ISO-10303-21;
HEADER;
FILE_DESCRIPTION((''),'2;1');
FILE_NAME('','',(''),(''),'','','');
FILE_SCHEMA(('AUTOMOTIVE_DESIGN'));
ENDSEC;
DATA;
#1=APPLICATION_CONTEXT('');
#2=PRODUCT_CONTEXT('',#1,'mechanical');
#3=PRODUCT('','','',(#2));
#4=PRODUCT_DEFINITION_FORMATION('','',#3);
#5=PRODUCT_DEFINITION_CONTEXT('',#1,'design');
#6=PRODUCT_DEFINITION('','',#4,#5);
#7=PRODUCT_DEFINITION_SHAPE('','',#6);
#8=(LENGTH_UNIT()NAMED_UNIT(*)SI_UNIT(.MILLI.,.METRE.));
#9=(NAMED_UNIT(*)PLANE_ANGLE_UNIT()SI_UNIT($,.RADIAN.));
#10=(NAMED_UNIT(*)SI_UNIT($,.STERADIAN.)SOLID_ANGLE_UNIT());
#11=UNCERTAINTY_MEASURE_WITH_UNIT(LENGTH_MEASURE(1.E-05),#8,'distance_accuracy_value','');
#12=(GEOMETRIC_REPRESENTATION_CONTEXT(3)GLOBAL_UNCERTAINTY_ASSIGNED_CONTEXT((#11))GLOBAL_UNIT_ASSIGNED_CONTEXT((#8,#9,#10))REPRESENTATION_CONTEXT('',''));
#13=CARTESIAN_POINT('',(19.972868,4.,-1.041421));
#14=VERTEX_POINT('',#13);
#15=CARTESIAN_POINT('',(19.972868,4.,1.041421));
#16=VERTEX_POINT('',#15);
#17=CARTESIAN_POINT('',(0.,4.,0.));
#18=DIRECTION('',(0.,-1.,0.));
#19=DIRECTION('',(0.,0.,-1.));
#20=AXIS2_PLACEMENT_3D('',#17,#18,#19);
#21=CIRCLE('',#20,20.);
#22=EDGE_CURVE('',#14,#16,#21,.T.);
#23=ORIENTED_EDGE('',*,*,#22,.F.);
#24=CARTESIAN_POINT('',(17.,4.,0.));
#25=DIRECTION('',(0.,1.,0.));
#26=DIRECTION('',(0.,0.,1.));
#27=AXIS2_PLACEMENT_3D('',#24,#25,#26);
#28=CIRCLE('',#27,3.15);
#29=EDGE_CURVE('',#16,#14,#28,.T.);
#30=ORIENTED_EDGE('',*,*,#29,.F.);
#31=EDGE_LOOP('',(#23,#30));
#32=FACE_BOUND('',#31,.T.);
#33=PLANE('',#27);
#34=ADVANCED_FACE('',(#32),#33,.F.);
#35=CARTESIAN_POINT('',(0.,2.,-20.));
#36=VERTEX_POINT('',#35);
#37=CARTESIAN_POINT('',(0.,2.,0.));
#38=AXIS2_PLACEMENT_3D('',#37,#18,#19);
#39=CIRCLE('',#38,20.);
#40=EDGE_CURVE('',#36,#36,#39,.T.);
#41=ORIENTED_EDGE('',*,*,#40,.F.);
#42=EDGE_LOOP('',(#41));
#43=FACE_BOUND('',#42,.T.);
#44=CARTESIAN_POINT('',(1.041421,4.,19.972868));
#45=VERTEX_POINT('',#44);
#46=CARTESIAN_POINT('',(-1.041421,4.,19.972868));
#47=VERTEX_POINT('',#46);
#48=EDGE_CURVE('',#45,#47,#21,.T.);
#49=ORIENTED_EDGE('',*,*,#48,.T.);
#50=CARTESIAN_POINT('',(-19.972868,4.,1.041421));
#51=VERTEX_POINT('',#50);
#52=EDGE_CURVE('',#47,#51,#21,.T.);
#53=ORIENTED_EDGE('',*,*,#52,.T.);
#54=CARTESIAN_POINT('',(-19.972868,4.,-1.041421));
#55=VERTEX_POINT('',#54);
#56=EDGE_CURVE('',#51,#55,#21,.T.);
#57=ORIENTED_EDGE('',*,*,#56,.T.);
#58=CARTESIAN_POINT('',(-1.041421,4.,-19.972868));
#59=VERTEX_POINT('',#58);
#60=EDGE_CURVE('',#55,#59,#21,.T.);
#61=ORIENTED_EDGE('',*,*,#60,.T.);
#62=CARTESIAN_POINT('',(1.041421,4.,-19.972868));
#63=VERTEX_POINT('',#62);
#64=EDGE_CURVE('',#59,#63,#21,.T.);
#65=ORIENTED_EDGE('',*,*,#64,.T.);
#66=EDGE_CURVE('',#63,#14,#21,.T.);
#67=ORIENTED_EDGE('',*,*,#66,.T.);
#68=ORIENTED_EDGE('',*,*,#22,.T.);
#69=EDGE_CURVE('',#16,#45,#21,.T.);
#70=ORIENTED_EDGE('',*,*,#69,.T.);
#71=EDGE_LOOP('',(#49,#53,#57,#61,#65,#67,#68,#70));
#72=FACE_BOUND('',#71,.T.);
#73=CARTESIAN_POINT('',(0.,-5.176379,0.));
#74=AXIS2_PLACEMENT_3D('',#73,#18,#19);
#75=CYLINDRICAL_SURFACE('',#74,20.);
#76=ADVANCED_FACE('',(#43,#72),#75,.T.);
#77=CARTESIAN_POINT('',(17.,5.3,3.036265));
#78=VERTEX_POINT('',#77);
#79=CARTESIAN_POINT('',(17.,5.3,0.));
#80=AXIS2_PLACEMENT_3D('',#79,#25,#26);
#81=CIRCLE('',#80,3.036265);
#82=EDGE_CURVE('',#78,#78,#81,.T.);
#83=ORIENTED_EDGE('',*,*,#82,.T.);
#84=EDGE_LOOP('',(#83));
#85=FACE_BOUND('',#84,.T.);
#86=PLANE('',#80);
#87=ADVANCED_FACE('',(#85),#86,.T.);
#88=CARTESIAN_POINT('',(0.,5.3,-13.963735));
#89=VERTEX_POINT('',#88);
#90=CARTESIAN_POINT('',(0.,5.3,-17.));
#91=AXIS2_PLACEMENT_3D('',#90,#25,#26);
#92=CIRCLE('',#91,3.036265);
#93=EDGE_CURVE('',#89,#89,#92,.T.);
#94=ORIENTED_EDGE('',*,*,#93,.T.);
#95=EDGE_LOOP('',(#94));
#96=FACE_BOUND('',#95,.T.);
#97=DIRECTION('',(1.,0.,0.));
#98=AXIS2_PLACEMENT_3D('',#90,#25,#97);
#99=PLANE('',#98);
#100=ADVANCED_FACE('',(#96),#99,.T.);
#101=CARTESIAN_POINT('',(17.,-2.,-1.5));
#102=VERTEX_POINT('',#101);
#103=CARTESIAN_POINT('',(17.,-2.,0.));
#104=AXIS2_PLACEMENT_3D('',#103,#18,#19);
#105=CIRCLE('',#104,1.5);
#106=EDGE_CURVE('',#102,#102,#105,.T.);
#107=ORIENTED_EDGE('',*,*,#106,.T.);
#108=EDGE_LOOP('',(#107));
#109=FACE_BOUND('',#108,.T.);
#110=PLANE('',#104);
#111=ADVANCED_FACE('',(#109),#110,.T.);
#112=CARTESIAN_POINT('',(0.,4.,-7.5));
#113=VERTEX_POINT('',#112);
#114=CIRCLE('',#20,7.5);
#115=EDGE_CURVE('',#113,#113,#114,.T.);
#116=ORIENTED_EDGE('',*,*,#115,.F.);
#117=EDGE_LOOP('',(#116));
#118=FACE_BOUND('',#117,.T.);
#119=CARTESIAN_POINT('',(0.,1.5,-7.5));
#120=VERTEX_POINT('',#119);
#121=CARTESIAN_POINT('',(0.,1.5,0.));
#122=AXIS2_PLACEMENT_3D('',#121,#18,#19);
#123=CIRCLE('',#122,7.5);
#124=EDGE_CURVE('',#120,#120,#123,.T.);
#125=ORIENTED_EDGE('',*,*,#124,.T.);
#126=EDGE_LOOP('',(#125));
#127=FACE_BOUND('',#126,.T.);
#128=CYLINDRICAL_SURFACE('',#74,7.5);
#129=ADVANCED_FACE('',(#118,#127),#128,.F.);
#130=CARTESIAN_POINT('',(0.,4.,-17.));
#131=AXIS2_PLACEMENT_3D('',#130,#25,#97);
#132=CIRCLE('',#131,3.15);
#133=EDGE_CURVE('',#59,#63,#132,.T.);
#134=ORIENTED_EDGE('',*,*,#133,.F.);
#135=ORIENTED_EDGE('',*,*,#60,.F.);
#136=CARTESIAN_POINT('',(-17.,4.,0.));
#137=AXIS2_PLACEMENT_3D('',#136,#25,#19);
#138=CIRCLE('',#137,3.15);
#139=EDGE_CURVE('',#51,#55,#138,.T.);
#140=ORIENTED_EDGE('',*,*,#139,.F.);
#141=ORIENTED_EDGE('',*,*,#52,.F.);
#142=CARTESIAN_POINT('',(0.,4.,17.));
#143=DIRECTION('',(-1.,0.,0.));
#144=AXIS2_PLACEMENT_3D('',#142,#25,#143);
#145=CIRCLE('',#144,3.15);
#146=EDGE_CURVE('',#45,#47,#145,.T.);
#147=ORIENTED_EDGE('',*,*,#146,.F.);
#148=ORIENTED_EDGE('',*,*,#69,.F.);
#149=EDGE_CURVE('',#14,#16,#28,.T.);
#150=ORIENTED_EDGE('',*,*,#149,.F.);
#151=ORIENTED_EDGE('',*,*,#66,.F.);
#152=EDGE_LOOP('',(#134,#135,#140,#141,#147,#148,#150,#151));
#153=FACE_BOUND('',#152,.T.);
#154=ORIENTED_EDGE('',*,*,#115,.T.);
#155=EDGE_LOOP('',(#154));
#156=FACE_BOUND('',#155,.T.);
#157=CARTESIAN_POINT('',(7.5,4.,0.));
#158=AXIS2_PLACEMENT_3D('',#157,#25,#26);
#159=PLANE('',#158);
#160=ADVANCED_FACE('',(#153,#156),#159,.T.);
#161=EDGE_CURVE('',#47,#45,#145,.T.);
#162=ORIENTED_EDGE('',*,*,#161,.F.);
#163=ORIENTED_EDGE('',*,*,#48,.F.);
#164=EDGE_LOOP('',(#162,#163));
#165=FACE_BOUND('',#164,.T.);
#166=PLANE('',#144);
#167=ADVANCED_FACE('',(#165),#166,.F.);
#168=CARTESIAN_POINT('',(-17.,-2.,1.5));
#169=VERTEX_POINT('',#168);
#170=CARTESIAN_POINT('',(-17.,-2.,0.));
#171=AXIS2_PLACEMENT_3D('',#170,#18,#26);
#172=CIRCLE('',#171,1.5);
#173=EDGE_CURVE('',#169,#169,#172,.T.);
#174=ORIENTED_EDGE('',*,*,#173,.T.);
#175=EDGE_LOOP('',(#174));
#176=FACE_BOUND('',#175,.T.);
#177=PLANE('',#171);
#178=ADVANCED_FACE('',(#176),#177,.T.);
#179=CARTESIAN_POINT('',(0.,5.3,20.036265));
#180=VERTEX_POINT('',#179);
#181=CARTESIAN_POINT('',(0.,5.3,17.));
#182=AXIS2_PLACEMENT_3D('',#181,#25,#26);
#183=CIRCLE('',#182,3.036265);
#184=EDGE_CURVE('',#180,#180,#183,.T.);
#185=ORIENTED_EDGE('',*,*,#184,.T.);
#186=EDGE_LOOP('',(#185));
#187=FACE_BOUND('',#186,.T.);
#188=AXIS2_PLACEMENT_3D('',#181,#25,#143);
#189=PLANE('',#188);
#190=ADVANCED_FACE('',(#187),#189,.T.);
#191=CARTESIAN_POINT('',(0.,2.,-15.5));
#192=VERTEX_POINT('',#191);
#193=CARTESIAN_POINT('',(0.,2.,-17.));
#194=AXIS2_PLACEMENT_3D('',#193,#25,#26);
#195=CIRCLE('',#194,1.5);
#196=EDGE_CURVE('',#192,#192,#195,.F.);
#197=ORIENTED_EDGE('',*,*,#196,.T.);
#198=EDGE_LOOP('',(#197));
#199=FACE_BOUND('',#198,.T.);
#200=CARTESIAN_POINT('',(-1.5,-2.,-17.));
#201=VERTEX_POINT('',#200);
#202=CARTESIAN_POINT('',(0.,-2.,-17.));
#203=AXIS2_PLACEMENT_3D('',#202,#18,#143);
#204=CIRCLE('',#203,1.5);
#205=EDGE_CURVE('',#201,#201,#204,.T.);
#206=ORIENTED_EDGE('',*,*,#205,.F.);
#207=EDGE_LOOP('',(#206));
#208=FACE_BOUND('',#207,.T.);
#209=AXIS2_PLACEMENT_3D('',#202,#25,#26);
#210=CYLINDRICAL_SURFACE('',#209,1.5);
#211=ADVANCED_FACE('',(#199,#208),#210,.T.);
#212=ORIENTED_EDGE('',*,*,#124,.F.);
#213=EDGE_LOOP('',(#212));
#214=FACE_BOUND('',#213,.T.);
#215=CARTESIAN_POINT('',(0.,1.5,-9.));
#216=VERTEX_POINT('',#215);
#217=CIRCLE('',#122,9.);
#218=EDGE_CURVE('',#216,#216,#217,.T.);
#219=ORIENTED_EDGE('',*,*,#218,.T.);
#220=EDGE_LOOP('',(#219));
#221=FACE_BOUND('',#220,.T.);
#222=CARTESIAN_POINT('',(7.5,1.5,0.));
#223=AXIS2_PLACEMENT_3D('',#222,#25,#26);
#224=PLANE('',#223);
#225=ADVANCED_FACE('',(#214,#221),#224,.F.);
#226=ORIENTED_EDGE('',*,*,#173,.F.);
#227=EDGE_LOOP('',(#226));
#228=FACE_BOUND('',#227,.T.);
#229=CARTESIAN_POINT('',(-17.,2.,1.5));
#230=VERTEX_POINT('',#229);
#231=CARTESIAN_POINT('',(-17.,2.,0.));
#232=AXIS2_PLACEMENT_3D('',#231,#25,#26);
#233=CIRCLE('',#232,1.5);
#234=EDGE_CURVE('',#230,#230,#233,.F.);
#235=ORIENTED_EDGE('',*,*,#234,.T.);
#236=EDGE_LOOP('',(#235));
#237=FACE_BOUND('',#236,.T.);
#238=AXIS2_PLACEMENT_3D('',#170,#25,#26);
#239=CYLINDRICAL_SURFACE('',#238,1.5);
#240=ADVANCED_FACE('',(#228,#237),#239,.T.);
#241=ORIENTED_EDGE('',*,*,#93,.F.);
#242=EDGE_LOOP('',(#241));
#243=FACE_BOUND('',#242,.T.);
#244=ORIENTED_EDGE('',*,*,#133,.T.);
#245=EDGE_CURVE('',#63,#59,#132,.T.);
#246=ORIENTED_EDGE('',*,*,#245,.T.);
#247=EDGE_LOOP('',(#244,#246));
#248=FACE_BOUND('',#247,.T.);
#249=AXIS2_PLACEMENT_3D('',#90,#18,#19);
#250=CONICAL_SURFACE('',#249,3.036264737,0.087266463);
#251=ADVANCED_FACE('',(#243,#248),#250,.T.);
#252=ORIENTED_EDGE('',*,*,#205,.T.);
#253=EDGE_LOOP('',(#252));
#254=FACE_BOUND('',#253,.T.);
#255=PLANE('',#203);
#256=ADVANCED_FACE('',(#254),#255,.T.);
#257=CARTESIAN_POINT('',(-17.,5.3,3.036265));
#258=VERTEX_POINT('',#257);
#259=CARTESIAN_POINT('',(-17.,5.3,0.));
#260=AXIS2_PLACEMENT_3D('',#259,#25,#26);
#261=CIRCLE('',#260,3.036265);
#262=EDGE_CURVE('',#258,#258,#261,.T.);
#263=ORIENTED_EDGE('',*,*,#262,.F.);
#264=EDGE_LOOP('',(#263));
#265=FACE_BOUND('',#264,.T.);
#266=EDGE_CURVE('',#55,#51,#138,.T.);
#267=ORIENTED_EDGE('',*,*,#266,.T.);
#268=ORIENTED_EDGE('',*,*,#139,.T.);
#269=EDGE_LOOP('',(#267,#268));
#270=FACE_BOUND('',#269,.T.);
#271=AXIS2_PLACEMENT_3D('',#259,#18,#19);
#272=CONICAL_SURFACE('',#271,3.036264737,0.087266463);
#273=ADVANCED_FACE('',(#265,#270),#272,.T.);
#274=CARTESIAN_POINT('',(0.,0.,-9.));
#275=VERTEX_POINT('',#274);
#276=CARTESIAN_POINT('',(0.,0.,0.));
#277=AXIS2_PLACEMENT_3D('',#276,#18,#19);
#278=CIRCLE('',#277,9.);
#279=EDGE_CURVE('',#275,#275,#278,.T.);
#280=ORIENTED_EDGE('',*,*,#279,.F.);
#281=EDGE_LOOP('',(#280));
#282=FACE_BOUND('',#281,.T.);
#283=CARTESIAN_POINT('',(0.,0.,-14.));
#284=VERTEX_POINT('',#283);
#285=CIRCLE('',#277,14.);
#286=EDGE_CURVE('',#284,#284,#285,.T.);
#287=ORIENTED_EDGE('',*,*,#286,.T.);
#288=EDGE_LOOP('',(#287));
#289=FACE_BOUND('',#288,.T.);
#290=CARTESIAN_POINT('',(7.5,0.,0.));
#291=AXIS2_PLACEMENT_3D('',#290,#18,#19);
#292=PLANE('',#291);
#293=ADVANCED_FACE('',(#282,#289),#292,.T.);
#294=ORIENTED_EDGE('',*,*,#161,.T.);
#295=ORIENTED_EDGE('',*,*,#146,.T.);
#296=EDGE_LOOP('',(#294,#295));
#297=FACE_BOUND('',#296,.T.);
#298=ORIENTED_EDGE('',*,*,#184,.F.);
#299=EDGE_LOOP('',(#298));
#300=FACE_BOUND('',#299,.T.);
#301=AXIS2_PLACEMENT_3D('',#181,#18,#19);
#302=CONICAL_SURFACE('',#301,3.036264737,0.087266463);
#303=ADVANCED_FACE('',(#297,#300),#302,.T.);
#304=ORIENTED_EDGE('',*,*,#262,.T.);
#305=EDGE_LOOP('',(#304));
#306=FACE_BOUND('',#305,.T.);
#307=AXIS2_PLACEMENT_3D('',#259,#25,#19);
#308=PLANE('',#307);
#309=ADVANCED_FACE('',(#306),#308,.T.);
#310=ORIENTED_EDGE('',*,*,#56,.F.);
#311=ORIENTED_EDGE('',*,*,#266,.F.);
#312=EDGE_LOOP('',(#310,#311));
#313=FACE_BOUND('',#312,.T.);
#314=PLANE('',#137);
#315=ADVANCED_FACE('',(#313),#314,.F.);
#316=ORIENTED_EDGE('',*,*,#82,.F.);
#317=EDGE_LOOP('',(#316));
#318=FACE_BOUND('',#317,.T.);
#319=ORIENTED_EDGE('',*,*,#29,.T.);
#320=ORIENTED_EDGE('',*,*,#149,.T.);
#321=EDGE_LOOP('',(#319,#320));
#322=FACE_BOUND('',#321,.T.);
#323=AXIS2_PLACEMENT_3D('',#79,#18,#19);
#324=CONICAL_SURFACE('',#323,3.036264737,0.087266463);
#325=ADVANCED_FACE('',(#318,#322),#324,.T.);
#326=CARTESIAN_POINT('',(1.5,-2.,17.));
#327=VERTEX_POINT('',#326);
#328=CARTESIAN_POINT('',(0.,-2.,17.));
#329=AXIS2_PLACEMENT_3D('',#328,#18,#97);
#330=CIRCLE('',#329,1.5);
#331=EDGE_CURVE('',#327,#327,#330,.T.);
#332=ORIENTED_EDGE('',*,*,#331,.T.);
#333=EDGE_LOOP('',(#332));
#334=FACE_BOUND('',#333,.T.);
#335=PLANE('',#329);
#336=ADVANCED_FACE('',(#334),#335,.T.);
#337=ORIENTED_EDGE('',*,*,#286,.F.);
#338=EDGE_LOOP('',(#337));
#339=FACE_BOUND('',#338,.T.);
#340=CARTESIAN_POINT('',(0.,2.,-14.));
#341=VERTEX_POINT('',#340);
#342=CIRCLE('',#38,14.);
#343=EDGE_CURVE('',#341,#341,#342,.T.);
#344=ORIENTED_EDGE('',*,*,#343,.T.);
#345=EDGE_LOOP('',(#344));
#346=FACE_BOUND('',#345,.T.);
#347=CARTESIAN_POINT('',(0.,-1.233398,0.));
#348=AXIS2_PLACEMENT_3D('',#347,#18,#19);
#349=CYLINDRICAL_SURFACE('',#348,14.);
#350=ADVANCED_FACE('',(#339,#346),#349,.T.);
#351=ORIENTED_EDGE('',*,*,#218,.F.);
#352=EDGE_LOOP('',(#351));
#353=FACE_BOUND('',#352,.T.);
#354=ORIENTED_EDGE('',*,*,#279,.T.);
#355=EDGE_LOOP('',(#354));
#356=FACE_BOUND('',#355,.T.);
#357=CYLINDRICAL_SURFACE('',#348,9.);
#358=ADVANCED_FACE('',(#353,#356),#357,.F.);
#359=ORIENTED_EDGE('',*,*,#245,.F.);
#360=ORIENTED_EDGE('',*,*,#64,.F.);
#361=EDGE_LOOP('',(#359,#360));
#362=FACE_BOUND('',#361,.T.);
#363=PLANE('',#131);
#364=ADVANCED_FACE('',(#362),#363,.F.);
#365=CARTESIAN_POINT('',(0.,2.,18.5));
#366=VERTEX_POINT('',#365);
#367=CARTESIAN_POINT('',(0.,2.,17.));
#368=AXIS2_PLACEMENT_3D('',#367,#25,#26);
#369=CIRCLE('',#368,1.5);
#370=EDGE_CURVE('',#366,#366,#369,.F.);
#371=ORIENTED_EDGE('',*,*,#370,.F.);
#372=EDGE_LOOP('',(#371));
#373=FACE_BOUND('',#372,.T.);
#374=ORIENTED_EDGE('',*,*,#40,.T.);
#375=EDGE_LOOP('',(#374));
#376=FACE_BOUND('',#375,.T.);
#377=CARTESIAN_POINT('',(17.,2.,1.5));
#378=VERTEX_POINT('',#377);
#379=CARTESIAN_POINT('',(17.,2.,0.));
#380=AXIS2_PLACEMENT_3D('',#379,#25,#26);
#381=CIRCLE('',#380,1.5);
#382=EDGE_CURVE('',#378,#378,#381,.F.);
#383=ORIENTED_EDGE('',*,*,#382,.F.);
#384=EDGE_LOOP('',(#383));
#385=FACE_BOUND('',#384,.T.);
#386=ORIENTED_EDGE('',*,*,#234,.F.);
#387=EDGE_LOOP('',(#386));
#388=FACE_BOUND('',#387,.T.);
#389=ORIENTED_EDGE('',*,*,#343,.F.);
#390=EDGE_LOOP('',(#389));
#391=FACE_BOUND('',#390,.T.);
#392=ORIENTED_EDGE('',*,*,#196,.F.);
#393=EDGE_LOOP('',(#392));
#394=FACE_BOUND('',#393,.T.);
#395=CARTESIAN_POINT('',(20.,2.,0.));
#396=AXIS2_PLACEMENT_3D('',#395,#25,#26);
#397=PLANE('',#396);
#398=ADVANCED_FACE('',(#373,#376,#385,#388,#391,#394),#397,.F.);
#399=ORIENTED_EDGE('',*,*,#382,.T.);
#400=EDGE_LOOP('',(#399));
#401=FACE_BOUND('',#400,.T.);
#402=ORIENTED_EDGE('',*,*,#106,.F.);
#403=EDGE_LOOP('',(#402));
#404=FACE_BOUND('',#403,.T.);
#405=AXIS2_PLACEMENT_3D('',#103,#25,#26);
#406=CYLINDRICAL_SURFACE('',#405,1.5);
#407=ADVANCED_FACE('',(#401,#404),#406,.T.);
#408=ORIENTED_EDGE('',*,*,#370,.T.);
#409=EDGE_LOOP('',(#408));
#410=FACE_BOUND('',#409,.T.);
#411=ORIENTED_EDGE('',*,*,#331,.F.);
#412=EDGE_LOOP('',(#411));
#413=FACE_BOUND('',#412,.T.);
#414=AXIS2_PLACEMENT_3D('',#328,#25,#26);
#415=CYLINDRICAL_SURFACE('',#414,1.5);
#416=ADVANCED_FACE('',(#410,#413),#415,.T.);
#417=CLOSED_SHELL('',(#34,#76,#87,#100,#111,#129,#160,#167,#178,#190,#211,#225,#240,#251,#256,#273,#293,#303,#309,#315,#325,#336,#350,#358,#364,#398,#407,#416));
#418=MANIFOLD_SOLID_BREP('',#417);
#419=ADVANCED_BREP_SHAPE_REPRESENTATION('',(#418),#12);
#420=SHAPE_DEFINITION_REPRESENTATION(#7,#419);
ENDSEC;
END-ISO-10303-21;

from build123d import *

# Parameters (mm, degrees)
SKETCH1_W           = 12.5
SKETCH1_H           = 4
SKETCH2_W           = 6
SKETCH2_H           = 2
SKETCH2_W_2         = 1.5
SKETCH2_H_2         = 1.5
SKETCH3_R           = 3.15
BOSS_EXTRUDE1_DEPTH = 1.3
SKETCH4_R           = 1.5
BOSS_EXTRUDE2_DEPTH = 4
CIRPATTERN1_COUNT   = 4
CHAMFER1_SIZE       = 1.3
CHAMFER1_SIZE_2     = 0.113735263


with BuildPart() as part:
    # Sketch1 → Revolve1 (revolve)
    with BuildSketch(Plane.XY, mode=Mode.PRIVATE) as revolve1_sk:
        with Locations((13.75, 2)):
            Rectangle(SKETCH1_W, SKETCH1_H)
    revolve(revolve1_sk.sketch.rotate(Axis((0, -5.176379432, 0), (0, 1, 0)), 90), axis=Axis((0, -5.176379432, 0), (0, 1, 0)))

    # Sketch2 → Cut-Revolve1 (revolve, cut)
    with BuildSketch(Plane.XY, mode=Mode.PRIVATE) as cut_revolve1_sk:
        with Locations((17, 1)):
            Rectangle(SKETCH2_W, SKETCH2_H)
        with Locations((8.25, 0.75)):
            Rectangle(SKETCH2_W_2, SKETCH2_H_2)
    revolve(cut_revolve1_sk.sketch.rotate(Axis((0, -1.233398275, 0), (0, 1, 0)), 90), axis=Axis((0, -1.233398275, 0), (0, 1, 0)), mode=Mode.SUBTRACT)

    # Sketch3 → Boss-Extrude1 (add)
    with BuildSketch(Plane(origin=(0, 4, 0), x_dir=(1, 0, 0), z_dir=(0, 1, 0))):
        with Locations(Location((17, 0, 0), (0, 0, 19.305796893))):
            Circle(SKETCH3_R)
    boss_extrude1 = extrude(amount=BOSS_EXTRUDE1_DEPTH)

    # Sketch4 → Boss-Extrude2 (add)
    with BuildSketch(Plane.XZ.offset(-2)):
        with Locations(Location((17, 0, 0), (0, 0, 90))):
            Circle(SKETCH4_R)
    boss_extrude2 = extrude(amount=BOSS_EXTRUDE2_DEPTH)

    # CirPattern1: Boss-Extrude1, Boss-Extrude2 ×4 about axis
    cirpattern1_axis = Axis((0, 0, 0), (0, 1, 0))
    add([boss_extrude1.rotate(cirpattern1_axis, i * 360 / CIRPATTERN1_COUNT) for i in range(1, CIRPATTERN1_COUNT)])
    add([boss_extrude2.rotate(cirpattern1_axis, i * 360 / CIRPATTERN1_COUNT) for i in range(1, CIRPATTERN1_COUNT)])

    # Chamfer1
    # the kernel refuses this chamfer: 1.3, 0.113735263 mm, written as the material it takes off along each edge
    with BuildSketch(Plane(origin=(17, 5.3, 0), x_dir=(0.9437675070022826, 0, -0.3306098799592901), z_dir=(0.3306098799592901, 0, 0.9437675070022826))) as chamfer1_piece_1_section:
        Polygon((3.15, -CHAMFER1_SIZE), (3.15 - CHAMFER1_SIZE_2 * 0.99999999634, 0), (3.15, 0), align=None)
    chamfer1_piece_1 = revolve(axis=Axis((17, 5.3, 0), (0, 1, 0)), mode=Mode.PRIVATE)
    chamfer1_piece_1 = split(chamfer1_piece_1, bisect_by=Plane(origin=(14.070685383, 4, 1.026164121), z_dir=(0, 1, 0)), keep=Keep.TOP, mode=Mode.PRIVATE)
    add(chamfer1_piece_1, mode=Mode.SUBTRACT)
    with BuildSketch(Plane(origin=(0, 5.3, 17), x_dir=(0.3306098799592899, 0, 0.9437675070022828), z_dir=(-0.9437675070022828, 0, 0.3306098799592899))) as chamfer1_piece_2_section:
        Polygon((3.15, -CHAMFER1_SIZE), (3.15 - CHAMFER1_SIZE_2 * 0.99999999634, 0), (3.15, 0), align=None)
    chamfer1_piece_2 = revolve(axis=Axis((0, 5.3, 17), (0, 1, 0)), mode=Mode.PRIVATE)
    chamfer1_piece_2 = split(chamfer1_piece_2, bisect_by=Plane(origin=(-1.026164121, 4, 14.070685383), z_dir=(0, 1, 0)), keep=Keep.TOP, mode=Mode.PRIVATE)
    add(chamfer1_piece_2, mode=Mode.SUBTRACT)
    with BuildSketch(Plane(origin=(-17, 5.3, 0), x_dir=(-0.9437675070022828, 0, 0.33060987995929), z_dir=(-0.33060987995929, 0, -0.9437675070022828))) as chamfer1_piece_3_section:
        Polygon((3.15, -CHAMFER1_SIZE), (3.15 - CHAMFER1_SIZE_2 * 0.99999999634, 0), (3.15, 0), align=None)
    chamfer1_piece_3 = revolve(axis=Axis((-17, 5.3, 0), (0, 1, 0)), mode=Mode.PRIVATE)
    chamfer1_piece_3 = split(chamfer1_piece_3, bisect_by=Plane(origin=(-14.070685383, 4, -1.026164121), z_dir=(0, 1, 0)), keep=Keep.TOP, mode=Mode.PRIVATE)
    add(chamfer1_piece_3, mode=Mode.SUBTRACT)
    with BuildSketch(Plane(origin=(0, 5.3, -17), x_dir=(-0.33060987995929003, 0, -0.9437675070022828), z_dir=(0.9437675070022828, 0, -0.33060987995929003))) as chamfer1_piece_4_section:
        Polygon((3.15, -CHAMFER1_SIZE), (3.15 - CHAMFER1_SIZE_2 * 0.99999999634, 0), (3.15, 0), align=None)
    chamfer1_piece_4 = revolve(axis=Axis((0, 5.3, -17), (0, 1, 0)), mode=Mode.PRIVATE)
    chamfer1_piece_4 = split(chamfer1_piece_4, bisect_by=Plane(origin=(1.026164121, 4, -14.070685383), z_dir=(0, 1, 0)), keep=Keep.TOP, mode=Mode.PRIVATE)
    add(chamfer1_piece_4, mode=Mode.SUBTRACT)


solid = part.part
